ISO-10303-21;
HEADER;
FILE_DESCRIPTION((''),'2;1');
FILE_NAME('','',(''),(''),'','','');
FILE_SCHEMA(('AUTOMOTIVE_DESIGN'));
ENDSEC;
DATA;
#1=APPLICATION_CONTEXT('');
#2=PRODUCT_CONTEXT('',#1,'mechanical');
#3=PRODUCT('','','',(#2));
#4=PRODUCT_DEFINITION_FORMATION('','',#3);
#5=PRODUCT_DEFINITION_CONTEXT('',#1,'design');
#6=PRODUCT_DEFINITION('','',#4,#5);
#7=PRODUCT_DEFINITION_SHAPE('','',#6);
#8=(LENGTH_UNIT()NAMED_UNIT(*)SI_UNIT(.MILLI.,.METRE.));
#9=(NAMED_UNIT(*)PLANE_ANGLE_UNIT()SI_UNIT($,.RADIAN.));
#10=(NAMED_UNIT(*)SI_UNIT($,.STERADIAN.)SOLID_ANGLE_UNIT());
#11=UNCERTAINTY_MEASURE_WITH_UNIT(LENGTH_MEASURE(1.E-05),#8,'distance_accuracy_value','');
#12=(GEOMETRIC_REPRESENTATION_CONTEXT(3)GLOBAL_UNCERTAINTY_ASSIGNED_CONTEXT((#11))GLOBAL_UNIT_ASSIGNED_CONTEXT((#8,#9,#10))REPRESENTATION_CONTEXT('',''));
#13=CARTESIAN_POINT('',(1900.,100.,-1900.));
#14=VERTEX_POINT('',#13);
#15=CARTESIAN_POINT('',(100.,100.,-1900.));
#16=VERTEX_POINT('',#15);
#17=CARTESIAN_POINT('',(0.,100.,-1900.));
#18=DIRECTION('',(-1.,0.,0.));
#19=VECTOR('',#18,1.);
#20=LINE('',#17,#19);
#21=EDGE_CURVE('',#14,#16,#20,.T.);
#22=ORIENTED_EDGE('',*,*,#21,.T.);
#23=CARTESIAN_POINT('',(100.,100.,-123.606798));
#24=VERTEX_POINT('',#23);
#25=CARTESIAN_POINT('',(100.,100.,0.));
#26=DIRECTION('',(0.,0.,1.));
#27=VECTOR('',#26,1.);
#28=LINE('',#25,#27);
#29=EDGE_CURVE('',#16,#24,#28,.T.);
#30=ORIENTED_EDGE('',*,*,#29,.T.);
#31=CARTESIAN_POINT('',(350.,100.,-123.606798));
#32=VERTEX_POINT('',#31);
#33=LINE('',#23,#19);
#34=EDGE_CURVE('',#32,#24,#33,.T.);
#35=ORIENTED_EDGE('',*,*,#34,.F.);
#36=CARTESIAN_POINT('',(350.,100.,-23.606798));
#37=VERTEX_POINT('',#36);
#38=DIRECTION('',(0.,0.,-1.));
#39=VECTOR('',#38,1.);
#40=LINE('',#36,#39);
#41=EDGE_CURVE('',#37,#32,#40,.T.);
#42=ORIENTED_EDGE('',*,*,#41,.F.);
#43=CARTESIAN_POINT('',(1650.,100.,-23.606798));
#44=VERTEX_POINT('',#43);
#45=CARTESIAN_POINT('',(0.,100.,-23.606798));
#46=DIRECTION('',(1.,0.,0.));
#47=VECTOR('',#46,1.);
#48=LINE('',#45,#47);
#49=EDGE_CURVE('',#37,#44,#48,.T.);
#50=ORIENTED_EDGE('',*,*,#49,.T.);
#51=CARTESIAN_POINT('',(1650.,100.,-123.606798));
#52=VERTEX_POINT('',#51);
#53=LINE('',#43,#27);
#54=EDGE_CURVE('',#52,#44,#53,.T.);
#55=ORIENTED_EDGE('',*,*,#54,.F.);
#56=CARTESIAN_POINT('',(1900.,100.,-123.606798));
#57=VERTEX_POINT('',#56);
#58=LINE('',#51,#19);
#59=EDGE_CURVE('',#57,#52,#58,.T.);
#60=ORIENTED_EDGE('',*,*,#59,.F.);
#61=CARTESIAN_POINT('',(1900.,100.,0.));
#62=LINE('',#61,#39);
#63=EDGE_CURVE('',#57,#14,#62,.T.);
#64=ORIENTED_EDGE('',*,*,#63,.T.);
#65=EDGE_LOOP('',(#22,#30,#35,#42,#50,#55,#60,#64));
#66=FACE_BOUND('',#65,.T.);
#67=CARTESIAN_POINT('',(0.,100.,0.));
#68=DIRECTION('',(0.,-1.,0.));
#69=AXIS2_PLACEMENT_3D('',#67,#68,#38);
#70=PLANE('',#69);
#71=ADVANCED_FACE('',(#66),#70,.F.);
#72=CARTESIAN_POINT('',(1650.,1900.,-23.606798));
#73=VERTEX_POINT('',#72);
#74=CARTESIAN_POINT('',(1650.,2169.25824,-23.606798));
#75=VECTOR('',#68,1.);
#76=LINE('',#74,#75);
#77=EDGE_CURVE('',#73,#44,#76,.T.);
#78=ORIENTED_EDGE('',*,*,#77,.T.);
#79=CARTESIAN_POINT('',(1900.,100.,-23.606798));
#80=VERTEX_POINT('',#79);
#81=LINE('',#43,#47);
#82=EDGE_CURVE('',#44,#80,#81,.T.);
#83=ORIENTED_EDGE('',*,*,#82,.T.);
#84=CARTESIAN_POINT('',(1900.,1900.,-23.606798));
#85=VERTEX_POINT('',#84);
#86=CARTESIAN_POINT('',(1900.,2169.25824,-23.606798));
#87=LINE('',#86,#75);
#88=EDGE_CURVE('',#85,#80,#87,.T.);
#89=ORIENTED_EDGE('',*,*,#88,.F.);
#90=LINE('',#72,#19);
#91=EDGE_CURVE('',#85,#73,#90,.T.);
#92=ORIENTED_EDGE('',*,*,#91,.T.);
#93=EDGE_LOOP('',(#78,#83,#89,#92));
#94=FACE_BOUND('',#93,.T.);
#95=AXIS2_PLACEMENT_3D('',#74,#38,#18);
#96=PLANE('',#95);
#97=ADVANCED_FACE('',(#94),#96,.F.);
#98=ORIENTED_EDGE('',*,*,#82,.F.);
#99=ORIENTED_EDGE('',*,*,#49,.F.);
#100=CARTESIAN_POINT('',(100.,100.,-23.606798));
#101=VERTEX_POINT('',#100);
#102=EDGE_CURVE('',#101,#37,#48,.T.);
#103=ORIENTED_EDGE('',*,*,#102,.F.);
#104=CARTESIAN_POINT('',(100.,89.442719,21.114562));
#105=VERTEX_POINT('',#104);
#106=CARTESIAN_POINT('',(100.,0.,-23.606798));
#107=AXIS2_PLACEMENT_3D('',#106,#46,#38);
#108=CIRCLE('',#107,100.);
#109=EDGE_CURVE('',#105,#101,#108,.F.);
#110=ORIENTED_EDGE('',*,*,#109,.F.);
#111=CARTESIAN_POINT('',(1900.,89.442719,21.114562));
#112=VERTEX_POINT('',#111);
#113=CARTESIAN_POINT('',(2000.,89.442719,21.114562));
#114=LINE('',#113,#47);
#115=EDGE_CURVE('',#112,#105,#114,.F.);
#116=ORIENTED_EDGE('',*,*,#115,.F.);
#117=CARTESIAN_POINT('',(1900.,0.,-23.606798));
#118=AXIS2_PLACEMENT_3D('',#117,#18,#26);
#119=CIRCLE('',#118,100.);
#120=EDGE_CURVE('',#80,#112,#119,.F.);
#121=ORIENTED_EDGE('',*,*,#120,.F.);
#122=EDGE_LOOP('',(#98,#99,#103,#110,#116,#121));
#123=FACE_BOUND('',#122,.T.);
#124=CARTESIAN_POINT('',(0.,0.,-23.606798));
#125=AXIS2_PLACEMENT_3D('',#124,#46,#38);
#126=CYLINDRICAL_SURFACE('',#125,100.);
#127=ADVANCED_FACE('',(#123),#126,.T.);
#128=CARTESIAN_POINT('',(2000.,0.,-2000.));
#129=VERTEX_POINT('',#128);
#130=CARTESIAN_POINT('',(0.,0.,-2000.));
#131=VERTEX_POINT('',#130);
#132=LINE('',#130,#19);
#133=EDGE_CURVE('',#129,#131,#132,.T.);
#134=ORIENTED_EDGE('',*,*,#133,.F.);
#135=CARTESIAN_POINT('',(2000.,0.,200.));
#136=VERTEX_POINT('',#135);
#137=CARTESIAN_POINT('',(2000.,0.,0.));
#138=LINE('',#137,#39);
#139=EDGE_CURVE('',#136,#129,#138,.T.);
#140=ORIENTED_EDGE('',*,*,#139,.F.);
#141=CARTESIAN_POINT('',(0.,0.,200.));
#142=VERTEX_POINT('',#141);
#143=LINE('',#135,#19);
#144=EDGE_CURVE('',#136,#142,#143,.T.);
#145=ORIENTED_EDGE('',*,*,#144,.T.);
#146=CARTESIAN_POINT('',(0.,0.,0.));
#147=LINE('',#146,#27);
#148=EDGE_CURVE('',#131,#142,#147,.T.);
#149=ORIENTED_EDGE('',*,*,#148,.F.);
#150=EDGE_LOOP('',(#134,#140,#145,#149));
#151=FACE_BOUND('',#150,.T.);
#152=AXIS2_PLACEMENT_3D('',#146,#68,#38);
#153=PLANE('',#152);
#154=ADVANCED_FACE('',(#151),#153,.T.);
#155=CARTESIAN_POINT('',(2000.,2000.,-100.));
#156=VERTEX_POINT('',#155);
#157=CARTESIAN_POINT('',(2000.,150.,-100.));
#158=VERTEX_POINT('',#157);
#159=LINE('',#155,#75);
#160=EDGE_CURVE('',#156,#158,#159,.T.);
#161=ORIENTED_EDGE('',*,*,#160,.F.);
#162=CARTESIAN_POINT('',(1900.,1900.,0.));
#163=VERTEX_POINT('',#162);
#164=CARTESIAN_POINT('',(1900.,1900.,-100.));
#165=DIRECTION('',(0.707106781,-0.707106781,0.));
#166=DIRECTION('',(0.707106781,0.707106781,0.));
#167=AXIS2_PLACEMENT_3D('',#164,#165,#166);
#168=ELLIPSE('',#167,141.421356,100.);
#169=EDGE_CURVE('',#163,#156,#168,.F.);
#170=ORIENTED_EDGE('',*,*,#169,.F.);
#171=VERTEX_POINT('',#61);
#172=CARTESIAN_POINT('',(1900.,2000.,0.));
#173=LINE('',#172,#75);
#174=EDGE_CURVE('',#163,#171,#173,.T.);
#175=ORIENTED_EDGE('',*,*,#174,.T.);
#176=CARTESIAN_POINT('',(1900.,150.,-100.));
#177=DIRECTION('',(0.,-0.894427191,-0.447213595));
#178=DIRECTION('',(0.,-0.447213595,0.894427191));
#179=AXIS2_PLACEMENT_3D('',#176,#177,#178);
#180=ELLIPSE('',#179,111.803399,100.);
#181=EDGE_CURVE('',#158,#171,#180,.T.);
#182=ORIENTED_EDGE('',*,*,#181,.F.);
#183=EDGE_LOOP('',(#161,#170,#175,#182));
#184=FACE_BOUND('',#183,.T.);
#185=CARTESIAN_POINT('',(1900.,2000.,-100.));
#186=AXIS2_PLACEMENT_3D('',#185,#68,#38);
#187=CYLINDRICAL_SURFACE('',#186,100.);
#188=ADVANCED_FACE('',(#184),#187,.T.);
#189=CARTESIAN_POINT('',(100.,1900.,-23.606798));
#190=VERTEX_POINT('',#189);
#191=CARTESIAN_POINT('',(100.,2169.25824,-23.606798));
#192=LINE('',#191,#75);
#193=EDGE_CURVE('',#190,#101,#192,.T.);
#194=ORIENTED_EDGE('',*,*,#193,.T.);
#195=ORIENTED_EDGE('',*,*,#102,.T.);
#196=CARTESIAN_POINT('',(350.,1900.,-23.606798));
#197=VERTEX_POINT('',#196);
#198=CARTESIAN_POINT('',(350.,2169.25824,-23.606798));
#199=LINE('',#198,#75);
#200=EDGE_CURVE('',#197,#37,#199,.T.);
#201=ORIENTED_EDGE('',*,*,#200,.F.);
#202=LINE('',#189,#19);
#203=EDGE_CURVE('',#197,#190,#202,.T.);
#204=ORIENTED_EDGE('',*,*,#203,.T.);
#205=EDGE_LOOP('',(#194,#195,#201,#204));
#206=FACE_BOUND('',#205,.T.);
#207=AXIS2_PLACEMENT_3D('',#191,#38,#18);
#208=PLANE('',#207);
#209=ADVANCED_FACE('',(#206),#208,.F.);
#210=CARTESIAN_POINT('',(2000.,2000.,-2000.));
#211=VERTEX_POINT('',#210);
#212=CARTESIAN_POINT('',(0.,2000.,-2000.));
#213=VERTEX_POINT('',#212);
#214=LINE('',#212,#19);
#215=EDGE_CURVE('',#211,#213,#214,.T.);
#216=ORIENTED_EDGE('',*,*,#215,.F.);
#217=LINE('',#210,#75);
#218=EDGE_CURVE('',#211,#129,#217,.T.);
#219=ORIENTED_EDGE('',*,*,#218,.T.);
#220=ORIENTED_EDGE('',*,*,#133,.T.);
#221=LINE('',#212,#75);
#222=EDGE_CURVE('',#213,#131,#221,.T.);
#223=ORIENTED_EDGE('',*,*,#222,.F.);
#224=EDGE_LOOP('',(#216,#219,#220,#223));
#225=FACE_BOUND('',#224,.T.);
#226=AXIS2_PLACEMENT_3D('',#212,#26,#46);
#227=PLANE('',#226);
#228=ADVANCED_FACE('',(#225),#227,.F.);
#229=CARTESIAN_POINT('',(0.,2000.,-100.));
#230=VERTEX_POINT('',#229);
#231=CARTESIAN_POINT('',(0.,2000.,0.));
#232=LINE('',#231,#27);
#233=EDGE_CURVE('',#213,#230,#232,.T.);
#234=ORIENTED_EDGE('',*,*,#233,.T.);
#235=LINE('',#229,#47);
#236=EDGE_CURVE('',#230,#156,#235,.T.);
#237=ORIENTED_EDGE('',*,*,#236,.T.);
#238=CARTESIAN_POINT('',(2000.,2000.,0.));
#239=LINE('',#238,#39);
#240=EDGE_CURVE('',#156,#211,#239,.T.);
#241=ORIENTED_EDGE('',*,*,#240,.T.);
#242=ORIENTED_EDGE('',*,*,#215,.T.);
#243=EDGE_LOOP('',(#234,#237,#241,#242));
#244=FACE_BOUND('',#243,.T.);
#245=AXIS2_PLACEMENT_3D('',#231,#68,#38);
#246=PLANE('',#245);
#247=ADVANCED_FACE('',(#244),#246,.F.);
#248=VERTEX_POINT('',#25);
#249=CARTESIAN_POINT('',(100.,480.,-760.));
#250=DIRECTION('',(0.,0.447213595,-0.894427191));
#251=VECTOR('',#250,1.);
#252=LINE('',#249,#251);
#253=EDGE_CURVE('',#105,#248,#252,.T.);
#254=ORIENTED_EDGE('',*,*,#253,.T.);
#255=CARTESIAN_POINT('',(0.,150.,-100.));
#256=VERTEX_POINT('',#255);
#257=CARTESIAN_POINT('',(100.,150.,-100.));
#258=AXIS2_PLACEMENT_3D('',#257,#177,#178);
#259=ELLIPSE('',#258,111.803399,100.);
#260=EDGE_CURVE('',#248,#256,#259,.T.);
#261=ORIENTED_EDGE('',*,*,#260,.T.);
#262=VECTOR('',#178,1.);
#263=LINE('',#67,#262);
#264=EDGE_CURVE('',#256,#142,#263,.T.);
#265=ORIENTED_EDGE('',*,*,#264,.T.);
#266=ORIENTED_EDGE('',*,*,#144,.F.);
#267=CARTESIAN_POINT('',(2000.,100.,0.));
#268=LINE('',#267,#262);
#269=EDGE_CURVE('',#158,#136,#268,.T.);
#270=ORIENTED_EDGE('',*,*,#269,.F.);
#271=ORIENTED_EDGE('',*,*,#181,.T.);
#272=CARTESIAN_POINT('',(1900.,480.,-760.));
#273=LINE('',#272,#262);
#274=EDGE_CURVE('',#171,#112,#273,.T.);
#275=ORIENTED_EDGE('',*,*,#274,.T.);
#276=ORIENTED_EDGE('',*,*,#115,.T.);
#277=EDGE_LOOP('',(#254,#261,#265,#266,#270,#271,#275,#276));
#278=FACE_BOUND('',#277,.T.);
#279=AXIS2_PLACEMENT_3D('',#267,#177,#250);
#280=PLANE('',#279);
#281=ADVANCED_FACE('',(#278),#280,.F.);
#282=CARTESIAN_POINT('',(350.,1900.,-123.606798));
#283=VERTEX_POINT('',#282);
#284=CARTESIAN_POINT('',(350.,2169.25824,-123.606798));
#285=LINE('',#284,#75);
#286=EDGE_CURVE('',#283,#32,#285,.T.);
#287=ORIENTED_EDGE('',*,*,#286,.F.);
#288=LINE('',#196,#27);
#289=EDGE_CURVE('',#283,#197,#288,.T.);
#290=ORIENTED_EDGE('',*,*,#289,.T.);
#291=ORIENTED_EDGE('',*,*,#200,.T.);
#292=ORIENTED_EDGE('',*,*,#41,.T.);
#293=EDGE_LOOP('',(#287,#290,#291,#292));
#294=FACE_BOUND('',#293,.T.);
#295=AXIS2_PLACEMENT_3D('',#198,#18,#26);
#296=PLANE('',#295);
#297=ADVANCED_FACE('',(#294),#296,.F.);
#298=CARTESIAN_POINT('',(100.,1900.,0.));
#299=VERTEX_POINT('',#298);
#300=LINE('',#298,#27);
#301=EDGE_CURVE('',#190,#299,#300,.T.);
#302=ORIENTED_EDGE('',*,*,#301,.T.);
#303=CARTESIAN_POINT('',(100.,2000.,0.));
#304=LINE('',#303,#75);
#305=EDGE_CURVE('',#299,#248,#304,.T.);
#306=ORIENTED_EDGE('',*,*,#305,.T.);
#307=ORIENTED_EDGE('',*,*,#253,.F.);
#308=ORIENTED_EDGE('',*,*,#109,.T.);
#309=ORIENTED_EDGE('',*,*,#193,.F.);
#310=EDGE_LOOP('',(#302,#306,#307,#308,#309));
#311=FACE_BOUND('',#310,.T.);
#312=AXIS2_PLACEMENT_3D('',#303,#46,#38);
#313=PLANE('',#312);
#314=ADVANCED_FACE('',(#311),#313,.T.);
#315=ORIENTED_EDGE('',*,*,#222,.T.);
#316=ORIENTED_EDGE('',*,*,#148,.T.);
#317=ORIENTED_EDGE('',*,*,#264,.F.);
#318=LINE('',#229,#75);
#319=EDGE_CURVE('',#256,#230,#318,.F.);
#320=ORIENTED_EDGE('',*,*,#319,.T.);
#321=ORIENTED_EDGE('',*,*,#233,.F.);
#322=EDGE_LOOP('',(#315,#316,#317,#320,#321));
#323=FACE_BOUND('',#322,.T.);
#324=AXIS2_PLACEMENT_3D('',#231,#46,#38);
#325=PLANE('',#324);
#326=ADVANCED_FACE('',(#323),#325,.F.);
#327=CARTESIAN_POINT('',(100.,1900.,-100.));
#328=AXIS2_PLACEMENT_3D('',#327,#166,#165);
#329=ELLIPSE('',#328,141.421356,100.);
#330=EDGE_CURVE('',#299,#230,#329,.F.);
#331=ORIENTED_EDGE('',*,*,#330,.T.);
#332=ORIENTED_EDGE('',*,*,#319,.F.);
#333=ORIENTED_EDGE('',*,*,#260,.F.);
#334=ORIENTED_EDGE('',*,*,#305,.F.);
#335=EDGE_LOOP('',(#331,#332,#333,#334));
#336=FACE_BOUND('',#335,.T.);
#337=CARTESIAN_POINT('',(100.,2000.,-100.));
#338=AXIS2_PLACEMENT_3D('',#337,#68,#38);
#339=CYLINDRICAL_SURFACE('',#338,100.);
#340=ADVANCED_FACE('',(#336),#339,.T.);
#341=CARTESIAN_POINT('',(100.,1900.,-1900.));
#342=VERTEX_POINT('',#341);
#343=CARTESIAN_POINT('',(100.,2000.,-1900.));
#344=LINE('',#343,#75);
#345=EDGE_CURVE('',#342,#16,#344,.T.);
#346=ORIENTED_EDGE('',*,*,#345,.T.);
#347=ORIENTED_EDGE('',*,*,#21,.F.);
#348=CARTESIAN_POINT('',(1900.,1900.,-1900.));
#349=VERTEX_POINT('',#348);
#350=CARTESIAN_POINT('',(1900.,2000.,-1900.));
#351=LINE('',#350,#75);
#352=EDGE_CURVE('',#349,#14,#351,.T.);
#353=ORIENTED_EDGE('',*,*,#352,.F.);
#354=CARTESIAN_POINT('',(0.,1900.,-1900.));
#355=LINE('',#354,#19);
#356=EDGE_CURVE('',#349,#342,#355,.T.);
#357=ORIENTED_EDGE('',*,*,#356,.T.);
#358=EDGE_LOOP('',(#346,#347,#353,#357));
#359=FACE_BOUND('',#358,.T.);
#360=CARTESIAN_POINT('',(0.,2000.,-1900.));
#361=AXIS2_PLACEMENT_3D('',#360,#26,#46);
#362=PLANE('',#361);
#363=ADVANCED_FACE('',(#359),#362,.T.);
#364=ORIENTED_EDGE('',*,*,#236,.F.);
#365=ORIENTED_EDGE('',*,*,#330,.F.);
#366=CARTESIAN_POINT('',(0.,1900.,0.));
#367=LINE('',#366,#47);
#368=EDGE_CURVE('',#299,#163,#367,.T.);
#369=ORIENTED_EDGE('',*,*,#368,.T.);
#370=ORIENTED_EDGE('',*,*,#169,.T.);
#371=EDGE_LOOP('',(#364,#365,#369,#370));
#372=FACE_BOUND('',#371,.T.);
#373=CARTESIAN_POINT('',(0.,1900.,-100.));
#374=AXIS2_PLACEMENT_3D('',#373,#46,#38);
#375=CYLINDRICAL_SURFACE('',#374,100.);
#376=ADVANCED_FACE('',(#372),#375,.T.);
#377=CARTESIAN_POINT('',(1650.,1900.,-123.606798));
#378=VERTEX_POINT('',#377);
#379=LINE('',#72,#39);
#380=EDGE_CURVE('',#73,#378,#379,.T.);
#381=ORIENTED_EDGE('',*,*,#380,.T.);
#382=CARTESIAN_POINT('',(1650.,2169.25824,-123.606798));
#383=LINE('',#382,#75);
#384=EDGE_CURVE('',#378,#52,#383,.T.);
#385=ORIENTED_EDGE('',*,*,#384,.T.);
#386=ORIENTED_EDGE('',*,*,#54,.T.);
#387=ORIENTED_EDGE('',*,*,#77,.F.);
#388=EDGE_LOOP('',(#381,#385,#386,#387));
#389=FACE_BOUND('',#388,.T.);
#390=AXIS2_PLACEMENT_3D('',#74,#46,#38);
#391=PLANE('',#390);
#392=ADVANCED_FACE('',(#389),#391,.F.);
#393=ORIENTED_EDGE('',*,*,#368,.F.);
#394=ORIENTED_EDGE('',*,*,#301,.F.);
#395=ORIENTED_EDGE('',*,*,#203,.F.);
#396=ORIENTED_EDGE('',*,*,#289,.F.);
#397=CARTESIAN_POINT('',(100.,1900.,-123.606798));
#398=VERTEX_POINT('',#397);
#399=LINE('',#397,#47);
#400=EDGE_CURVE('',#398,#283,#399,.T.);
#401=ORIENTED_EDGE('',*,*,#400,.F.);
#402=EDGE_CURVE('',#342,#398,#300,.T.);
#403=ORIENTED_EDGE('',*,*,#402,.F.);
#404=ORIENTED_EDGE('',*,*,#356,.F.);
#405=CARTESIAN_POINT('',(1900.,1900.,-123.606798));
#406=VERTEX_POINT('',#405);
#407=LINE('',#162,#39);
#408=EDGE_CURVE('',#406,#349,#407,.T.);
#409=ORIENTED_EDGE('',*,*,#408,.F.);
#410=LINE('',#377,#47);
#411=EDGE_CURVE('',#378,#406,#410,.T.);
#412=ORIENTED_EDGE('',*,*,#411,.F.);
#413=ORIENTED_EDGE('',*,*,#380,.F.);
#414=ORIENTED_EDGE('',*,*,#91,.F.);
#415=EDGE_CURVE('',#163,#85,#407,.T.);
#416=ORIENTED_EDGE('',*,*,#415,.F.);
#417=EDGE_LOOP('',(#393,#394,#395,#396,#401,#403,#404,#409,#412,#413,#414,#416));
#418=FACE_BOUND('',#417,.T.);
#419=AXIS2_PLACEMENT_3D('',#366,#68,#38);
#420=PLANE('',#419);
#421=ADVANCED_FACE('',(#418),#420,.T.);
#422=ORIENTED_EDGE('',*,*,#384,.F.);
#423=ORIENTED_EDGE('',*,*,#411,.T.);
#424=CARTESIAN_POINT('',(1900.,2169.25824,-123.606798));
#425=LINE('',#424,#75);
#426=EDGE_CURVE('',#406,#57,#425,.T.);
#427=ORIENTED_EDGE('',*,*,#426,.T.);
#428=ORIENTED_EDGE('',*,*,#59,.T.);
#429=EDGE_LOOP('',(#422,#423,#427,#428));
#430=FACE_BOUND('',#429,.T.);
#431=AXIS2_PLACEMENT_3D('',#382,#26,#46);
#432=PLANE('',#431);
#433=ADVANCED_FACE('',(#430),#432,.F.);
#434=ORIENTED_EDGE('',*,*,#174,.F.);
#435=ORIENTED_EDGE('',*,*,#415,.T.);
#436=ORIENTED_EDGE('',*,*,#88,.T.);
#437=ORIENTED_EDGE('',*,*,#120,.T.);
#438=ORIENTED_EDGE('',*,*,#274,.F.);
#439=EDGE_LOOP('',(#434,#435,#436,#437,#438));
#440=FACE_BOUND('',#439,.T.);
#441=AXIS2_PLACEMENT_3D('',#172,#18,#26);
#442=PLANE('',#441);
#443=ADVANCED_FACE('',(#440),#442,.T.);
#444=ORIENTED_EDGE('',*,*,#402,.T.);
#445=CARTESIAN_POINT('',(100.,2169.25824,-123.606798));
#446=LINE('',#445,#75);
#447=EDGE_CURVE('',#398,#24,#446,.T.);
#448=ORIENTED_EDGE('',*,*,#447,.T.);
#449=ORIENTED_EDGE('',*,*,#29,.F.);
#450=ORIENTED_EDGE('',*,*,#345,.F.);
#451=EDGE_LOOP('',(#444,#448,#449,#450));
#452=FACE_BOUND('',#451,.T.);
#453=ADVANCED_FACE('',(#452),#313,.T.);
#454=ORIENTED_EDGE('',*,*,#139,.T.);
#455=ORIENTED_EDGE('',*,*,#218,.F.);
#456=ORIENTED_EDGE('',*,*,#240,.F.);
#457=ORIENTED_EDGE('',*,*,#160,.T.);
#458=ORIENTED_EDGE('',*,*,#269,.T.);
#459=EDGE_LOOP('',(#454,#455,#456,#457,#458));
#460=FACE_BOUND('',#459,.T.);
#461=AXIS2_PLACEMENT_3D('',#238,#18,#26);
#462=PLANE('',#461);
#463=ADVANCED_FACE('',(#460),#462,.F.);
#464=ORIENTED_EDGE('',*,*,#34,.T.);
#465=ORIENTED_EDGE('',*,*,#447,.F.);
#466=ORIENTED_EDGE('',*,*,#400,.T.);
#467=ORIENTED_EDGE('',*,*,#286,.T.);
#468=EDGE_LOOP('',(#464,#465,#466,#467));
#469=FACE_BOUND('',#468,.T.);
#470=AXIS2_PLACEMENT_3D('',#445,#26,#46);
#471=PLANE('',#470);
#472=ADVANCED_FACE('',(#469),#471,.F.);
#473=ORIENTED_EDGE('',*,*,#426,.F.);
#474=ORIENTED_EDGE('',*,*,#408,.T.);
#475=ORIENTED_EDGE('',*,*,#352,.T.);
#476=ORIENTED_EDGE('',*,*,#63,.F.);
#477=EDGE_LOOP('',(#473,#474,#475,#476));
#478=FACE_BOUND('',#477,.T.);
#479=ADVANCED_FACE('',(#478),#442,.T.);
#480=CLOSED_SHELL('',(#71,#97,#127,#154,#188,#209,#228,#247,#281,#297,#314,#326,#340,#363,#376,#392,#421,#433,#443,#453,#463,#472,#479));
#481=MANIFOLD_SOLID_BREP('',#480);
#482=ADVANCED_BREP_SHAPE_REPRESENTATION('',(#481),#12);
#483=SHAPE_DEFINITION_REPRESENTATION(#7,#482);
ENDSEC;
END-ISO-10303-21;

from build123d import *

# Parameters (mm, degrees)
SKETCH1_W           = 2000
SKETCH1_H           = 2000
BOSS_EXTRUDE1_DEPTH = 2000
SHELL3_T            = -100
BOSS_EXTRUDE2_DEPTH = 2000
FILLET1_R           = 100
SKETCH3_W           = 250
SKETCH3_H           = 100
BOSS_EXTRUDE3_DEPTH = 1800


with BuildPart() as part:
    # Sketch1 → Boss-Extrude1 (new body)
    with BuildSketch(Plane(origin=(0, 0, 0), x_dir=(1, 0, 0), z_dir=(0, 1, 0))):
        with Locations((1000, 1000)):
            Rectangle(SKETCH1_W, SKETCH1_H)
    extrude(amount=BOSS_EXTRUDE1_DEPTH)

    # Shell3
    shell3_openings = [part.faces().sort_by_distance(p)[0] for p in [
        (1000, 1000, 0),
    ]]
    offset(amount=SHELL3_T, openings=shell3_openings, kind=Kind.INTERSECTION)

    # Sketch2 → Boss-Extrude2 (add)
    with BuildSketch(Plane(origin=(0, 0, 0), x_dir=(0, 0, -1), z_dir=(1, 0, 0))):
        Polygon((0, 100), (-200, 0), (0, 0), align=None)
    extrude(amount=BOSS_EXTRUDE2_DEPTH)

    # Fillet1
    fillet1_edges = [part.edges().sort_by_distance(p)[0] for p in [
        (0, 1050, 0),
        (2000, 1050, 0),
        (1000, 2000, 0),
        (1000, 100, 0),
    ]]
    fillet(fillet1_edges, radius=FILLET1_R - 0.0001)  # a hair under: the kernel refuses the full size

    # Sketch3 → Boss-Extrude3 (add)
    with BuildSketch(Plane(origin=(0, 100, 0), x_dir=(1, 0, 0), z_dir=(0, 1, 0))):
        with Locations((1775, 73.60679775)):
            Rectangle(SKETCH3_W, SKETCH3_H)
        with Locations((225, 73.60679775)):
            Rectangle(SKETCH3_W, SKETCH3_H)
    extrude(amount=BOSS_EXTRUDE3_DEPTH)


solid = part.part
